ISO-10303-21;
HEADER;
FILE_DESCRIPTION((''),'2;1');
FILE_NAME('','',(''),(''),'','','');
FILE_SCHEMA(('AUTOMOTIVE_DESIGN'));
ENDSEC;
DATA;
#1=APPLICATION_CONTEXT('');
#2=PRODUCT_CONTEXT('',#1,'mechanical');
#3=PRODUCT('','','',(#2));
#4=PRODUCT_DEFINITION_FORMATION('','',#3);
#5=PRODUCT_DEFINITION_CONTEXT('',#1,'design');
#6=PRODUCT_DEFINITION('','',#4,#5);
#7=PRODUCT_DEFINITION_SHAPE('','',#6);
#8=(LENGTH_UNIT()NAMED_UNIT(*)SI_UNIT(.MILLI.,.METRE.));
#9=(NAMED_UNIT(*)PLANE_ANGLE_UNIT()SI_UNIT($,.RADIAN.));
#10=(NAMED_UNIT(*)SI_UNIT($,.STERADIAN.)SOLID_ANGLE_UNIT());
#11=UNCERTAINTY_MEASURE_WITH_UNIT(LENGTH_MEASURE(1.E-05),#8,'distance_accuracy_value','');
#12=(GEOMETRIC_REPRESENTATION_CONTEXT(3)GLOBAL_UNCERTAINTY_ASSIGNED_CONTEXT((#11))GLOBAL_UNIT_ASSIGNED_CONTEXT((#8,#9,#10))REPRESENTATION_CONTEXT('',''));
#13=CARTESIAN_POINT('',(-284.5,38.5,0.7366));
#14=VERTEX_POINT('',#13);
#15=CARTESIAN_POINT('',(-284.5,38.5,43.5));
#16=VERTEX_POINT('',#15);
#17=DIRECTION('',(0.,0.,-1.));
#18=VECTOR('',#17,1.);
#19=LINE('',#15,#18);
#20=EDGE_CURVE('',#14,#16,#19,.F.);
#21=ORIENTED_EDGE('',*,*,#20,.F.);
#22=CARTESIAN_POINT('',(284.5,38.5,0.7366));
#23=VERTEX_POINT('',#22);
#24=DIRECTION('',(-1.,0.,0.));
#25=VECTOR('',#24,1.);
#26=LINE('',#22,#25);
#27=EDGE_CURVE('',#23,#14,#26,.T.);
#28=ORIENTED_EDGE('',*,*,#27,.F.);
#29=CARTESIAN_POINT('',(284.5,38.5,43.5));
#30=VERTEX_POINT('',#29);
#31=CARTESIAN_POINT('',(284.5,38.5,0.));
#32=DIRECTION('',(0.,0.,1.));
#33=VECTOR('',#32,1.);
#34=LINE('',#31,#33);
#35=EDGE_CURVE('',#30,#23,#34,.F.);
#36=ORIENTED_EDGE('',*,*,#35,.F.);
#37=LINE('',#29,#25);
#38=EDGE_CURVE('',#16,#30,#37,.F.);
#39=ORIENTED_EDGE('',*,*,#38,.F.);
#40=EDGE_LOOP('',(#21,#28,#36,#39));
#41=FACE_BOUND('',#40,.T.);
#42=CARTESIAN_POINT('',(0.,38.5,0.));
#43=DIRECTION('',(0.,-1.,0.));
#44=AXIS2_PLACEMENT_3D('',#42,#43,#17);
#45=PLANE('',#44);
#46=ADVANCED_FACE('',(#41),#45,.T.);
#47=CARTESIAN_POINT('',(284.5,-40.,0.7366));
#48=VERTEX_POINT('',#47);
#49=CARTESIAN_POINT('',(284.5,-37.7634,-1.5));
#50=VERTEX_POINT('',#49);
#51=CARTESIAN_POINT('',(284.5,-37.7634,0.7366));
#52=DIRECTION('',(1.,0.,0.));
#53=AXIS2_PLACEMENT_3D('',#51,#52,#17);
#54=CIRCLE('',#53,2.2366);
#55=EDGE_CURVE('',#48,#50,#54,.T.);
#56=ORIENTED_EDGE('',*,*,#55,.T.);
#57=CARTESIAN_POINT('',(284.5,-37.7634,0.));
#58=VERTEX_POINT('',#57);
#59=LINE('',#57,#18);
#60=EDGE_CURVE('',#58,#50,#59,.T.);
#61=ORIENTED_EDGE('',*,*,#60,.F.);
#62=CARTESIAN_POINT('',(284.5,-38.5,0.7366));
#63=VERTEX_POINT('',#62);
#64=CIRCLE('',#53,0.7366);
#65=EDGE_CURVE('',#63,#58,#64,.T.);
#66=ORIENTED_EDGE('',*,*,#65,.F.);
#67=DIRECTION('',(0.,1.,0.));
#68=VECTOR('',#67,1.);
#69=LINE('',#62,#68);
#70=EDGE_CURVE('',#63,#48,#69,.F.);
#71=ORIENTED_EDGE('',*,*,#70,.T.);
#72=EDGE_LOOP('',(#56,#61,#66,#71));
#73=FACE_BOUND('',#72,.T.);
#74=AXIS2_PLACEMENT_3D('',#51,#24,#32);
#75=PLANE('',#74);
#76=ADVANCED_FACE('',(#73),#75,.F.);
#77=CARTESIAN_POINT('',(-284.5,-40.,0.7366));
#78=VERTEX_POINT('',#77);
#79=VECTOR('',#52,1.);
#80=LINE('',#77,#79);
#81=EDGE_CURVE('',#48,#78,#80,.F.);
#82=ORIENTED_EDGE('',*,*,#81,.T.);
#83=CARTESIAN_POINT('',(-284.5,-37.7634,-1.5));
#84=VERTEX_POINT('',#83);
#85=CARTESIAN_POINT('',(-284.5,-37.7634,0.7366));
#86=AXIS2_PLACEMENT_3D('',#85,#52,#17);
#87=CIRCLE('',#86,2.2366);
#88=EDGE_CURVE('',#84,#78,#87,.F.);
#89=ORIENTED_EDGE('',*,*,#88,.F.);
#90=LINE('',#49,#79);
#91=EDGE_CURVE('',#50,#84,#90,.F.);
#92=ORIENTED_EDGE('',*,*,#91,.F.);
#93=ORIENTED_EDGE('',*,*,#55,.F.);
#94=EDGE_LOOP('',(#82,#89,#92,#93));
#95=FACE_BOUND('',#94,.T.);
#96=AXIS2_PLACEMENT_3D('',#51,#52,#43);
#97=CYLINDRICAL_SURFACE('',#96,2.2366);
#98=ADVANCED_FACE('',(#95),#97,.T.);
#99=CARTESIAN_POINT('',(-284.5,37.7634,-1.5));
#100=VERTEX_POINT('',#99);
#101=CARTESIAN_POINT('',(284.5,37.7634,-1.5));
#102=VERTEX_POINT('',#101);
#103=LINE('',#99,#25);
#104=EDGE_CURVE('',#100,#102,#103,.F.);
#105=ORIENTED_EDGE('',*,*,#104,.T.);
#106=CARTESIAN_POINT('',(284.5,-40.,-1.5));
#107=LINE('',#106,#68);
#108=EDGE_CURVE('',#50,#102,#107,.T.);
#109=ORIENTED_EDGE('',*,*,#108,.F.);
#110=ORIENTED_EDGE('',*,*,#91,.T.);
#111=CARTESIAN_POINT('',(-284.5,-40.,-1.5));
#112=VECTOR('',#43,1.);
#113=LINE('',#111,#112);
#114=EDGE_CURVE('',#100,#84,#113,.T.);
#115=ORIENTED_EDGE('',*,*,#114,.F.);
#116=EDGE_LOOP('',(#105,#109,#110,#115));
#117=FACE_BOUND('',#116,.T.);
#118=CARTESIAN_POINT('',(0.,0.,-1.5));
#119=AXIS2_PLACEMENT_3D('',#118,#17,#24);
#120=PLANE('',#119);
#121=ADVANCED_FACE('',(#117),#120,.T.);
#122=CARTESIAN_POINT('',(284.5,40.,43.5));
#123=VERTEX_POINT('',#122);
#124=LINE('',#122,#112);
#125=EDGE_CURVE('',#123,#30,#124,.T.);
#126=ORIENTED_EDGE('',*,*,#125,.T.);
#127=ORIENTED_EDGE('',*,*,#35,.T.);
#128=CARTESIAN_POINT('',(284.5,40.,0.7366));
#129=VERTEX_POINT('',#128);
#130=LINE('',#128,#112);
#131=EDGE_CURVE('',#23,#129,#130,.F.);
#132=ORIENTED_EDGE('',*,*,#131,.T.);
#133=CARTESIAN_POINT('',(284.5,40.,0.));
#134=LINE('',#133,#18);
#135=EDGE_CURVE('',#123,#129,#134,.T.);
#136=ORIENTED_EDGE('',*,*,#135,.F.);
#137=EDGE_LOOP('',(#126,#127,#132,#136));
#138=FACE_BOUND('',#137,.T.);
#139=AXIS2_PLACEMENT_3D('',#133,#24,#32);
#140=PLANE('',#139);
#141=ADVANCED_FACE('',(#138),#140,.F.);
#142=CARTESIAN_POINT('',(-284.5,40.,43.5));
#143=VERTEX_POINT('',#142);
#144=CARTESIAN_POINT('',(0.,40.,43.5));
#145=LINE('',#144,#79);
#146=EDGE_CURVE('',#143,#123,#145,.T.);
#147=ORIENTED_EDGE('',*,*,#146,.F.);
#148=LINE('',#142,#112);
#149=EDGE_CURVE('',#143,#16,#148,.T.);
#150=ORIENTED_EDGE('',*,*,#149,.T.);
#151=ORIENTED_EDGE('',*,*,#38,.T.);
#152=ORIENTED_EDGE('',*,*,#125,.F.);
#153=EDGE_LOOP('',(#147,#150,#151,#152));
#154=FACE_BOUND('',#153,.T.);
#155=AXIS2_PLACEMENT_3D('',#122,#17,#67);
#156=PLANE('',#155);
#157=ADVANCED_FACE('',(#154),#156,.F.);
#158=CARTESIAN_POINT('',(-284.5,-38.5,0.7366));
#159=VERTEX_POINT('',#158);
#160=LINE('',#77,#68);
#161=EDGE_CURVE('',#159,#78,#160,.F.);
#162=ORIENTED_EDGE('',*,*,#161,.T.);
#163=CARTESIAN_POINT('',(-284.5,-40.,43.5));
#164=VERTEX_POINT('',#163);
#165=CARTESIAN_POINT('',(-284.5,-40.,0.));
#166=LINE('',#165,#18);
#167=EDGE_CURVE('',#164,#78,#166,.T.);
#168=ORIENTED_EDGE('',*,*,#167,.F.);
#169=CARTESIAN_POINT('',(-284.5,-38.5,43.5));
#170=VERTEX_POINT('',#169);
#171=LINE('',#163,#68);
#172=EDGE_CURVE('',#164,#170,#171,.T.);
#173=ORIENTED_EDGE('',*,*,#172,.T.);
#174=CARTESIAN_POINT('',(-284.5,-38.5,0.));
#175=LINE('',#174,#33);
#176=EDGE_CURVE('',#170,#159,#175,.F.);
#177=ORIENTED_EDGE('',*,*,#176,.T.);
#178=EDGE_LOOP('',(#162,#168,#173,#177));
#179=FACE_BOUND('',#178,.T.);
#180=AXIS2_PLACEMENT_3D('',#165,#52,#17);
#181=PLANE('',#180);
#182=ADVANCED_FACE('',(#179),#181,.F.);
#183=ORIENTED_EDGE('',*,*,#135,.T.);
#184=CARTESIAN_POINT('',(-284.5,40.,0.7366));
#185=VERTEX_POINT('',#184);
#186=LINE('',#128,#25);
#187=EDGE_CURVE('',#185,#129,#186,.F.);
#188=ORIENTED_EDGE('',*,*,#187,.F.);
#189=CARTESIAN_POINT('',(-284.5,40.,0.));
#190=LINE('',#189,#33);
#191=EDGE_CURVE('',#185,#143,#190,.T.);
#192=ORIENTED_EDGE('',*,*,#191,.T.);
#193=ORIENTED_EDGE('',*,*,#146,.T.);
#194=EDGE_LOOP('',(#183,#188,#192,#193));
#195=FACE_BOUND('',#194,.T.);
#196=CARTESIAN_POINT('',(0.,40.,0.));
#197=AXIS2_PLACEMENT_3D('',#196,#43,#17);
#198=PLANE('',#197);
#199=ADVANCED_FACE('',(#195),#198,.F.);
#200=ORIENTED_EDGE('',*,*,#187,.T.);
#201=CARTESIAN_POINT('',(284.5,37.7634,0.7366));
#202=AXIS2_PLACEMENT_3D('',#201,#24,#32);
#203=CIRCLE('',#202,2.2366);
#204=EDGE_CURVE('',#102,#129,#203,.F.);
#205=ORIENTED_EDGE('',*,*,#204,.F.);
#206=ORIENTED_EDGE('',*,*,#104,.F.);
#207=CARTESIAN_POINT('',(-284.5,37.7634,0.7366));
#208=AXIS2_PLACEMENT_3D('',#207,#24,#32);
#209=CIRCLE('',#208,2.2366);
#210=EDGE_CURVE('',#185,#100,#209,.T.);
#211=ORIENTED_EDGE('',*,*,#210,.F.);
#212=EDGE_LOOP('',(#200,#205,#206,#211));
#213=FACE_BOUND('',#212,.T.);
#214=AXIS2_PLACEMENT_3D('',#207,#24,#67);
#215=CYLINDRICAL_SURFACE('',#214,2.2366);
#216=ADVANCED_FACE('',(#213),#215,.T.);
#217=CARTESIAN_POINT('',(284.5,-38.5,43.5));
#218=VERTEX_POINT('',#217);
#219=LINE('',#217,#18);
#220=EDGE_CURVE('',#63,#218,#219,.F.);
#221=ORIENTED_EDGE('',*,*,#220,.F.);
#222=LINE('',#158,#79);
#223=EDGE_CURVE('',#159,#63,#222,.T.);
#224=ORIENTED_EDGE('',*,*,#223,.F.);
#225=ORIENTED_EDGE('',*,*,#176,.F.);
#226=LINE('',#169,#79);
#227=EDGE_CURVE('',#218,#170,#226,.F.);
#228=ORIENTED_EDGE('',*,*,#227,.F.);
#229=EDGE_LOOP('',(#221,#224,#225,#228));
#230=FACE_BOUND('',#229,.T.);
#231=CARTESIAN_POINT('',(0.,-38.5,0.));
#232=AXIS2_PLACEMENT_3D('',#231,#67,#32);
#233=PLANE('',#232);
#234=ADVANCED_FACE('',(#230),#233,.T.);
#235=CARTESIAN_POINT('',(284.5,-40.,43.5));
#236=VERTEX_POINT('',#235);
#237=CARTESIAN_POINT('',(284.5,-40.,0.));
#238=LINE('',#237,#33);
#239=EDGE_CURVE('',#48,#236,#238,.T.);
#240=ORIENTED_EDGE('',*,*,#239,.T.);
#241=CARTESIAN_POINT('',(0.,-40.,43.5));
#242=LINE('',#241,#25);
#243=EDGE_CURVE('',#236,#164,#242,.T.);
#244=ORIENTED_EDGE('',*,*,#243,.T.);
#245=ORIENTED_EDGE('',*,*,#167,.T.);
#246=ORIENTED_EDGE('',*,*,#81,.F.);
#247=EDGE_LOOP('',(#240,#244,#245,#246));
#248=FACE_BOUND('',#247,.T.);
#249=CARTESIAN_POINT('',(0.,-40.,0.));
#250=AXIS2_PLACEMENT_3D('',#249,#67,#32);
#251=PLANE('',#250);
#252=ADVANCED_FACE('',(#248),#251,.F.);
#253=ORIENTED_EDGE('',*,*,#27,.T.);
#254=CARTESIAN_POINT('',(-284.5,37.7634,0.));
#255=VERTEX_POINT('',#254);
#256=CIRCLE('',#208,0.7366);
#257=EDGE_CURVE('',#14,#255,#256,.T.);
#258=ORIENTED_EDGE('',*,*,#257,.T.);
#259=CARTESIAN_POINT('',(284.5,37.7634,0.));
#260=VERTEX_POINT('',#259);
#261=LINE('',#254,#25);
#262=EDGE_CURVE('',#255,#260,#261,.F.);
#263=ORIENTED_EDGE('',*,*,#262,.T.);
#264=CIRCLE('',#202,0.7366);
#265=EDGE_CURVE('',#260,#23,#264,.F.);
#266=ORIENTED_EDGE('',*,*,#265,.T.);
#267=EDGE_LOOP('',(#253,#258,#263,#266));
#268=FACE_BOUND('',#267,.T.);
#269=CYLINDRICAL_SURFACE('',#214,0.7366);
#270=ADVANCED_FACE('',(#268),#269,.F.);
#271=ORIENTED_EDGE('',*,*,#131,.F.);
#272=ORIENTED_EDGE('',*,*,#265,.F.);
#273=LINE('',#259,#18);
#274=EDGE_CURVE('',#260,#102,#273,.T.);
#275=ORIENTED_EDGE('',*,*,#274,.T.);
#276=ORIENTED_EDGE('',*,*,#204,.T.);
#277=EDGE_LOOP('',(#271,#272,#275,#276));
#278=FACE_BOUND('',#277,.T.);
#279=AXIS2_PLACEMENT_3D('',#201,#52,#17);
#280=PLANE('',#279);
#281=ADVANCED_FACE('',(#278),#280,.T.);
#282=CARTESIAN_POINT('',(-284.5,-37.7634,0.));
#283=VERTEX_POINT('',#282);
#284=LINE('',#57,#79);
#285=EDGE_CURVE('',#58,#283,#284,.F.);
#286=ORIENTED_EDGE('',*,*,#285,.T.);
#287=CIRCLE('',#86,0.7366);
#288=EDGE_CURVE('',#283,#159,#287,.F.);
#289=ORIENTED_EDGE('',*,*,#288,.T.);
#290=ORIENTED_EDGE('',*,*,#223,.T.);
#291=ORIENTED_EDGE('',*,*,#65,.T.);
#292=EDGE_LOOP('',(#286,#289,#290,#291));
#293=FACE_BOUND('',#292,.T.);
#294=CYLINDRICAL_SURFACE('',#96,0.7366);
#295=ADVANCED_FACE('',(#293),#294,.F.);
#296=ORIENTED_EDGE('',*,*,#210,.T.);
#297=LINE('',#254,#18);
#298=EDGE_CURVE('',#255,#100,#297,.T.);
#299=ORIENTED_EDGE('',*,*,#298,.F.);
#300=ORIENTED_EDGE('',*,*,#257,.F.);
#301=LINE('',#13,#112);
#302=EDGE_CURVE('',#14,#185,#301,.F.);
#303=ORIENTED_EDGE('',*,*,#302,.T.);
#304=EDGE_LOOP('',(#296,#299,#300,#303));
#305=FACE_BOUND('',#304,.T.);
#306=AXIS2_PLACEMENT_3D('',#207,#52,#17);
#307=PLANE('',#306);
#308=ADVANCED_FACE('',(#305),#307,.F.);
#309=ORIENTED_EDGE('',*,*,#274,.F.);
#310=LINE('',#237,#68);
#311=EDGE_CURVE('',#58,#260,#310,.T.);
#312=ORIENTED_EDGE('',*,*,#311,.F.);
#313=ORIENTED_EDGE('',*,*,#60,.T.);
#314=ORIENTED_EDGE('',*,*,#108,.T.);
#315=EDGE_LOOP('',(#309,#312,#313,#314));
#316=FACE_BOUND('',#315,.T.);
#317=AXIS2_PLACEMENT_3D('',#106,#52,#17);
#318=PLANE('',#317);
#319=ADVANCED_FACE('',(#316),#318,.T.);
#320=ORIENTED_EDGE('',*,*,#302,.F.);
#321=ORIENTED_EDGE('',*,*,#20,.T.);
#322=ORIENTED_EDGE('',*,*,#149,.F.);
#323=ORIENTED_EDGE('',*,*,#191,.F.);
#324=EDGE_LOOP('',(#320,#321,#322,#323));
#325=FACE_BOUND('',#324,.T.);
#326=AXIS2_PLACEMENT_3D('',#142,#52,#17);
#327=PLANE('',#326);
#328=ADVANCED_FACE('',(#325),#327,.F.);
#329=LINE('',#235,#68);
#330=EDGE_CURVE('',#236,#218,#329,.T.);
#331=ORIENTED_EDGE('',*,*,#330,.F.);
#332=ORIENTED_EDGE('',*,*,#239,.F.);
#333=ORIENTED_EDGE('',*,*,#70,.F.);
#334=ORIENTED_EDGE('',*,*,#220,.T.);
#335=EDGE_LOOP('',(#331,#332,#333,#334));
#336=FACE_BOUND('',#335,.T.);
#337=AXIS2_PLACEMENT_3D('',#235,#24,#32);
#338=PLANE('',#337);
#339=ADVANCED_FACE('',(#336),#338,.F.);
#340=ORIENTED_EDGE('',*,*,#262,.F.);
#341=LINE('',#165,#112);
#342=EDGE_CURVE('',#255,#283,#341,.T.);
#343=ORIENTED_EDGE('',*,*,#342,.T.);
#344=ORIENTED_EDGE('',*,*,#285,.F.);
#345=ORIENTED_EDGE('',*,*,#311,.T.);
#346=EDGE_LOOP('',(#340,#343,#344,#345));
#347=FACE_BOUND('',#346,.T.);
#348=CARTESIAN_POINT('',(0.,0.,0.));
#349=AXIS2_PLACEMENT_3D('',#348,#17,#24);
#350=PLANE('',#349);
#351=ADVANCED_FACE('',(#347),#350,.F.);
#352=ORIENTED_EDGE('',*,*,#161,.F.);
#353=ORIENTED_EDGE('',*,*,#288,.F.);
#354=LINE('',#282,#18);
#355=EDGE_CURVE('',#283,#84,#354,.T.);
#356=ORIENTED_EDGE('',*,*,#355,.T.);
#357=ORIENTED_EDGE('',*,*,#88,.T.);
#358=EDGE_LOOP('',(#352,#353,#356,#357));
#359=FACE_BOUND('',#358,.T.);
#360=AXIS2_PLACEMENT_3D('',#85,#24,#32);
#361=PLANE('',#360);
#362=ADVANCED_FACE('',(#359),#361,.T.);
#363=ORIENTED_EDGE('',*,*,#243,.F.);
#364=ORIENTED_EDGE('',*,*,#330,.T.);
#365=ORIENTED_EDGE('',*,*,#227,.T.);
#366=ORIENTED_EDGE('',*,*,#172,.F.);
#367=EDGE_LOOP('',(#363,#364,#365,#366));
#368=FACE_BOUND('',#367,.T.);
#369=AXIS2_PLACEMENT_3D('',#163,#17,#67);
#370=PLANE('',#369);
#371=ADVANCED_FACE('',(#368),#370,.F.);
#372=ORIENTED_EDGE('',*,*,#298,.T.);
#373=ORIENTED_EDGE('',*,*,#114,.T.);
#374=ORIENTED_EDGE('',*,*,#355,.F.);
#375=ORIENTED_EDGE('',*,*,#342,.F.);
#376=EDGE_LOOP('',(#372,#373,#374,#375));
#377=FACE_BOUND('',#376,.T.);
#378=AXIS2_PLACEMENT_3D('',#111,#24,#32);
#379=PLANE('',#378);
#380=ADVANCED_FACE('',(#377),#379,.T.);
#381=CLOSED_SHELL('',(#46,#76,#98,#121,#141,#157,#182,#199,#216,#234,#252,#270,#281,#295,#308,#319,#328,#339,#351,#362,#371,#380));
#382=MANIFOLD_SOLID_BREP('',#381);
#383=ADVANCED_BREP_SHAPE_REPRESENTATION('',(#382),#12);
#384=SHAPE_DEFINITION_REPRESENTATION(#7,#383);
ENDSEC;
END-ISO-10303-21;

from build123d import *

# Parameters (mm, degrees)
SKETCH_1_W                         = 569
SKETCH_1_H                         = 80
SM_BASE_FLANGE_1_DEPTH             = 1.5
SM_EDGE_FLANGE_1_STRIP_W           = 7.4732
SM_EDGE_FLANGE_1_STRIP_H           = 1.5
SM_EDGE_FLANGE_1_STRIP_CUT_DEPTH   = 569
SM_EDGE_FLANGE_1_STRIP_2_W         = 7.4732
SM_EDGE_FLANGE_1_STRIP_2_H         = 1.5
SM_EDGE_FLANGE_1_STRIP_CUT_2_DEPTH = 569
SM_EDGE_FLANGE_1_DEPTH             = 569
SM_EDGE_FLANGE_1_BEND_DEPTH        = 569


# Sheet-metal steps are written as plain solids
with BuildPart() as part:
    # Sketch 1 → Базовая кромка1 (new body)
    with BuildSketch(Plane.XY):
        Rectangle(SKETCH_1_W, SKETCH_1_H)
    extrude(amount=-SM_BASE_FLANGE_1_DEPTH)

    # Ребро-кромка1 strip (across the edge) → Ребро-кромка1 strip cut (cut)
    with BuildSketch(Plane(origin=(284.5, 40, 0), x_dir=(0, -1, 0), z_dir=(-1, 0, 0))):
        with Locations((-1.5, -0.75)):
            Rectangle(SM_EDGE_FLANGE_1_STRIP_W, SM_EDGE_FLANGE_1_STRIP_H)
    extrude(amount=SM_EDGE_FLANGE_1_STRIP_CUT_DEPTH, mode=Mode.SUBTRACT)

    # Ребро-кромка1 strip 2 (across the edge) → Ребро-кромка1 strip cut 2 (cut)
    with BuildSketch(Plane(origin=(-284.5, -40, 0), x_dir=(0, 1, 0), z_dir=(1, 0, 0))):
        with Locations((-1.5, -0.75)):
            Rectangle(SM_EDGE_FLANGE_1_STRIP_2_W, SM_EDGE_FLANGE_1_STRIP_2_H)
    extrude(amount=SM_EDGE_FLANGE_1_STRIP_CUT_2_DEPTH, mode=Mode.SUBTRACT)

    # Ребро-кромка1 section (across the edge) → Ребро-кромка1 (add)
    with BuildSketch(Plane(origin=(284.5, 40, 0), x_dir=(0, -1, 0), z_dir=(-1, 0, 0))):
        with BuildLine():
            Line((0, 0.7366), (0, 43.5))
            Line((0, 43.5), (1.5, 43.5))
            Line((1.5, 43.5), (1.5, 0.7366))
            ThreePointArc((1.5, 0.7366), (1.715745145, 0.215745145), (2.2366, 0))
            Line((2.2366, 0), (2.2366, -1.5))
            ThreePointArc((2.2366, -1.5), (0.655084973, -0.844915027), (0, 0.7366))
        make_face()
    extrude(amount=SM_EDGE_FLANGE_1_DEPTH)

    # Ребро-кромка1 section 2 (across the edge) → Ребро-кромка1 bend (add)
    with BuildSketch(Plane(origin=(-284.5, -40, 0), x_dir=(0, 1, 0), z_dir=(1, 0, 0))):
        with BuildLine():
            Line((0, 0.7366), (0, 43.5))
            Line((0, 43.5), (1.5, 43.5))
            Line((1.5, 43.5), (1.5, 0.7366))
            ThreePointArc((1.5, 0.7366), (1.715745145, 0.215745145), (2.2366, 0))
            Line((2.2366, 0), (2.2366, -1.5))
            ThreePointArc((2.2366, -1.5), (0.655084973, -0.844915027), (0, 0.7366))
        make_face()
    extrude(amount=SM_EDGE_FLANGE_1_BEND_DEPTH)


solid = part.part
